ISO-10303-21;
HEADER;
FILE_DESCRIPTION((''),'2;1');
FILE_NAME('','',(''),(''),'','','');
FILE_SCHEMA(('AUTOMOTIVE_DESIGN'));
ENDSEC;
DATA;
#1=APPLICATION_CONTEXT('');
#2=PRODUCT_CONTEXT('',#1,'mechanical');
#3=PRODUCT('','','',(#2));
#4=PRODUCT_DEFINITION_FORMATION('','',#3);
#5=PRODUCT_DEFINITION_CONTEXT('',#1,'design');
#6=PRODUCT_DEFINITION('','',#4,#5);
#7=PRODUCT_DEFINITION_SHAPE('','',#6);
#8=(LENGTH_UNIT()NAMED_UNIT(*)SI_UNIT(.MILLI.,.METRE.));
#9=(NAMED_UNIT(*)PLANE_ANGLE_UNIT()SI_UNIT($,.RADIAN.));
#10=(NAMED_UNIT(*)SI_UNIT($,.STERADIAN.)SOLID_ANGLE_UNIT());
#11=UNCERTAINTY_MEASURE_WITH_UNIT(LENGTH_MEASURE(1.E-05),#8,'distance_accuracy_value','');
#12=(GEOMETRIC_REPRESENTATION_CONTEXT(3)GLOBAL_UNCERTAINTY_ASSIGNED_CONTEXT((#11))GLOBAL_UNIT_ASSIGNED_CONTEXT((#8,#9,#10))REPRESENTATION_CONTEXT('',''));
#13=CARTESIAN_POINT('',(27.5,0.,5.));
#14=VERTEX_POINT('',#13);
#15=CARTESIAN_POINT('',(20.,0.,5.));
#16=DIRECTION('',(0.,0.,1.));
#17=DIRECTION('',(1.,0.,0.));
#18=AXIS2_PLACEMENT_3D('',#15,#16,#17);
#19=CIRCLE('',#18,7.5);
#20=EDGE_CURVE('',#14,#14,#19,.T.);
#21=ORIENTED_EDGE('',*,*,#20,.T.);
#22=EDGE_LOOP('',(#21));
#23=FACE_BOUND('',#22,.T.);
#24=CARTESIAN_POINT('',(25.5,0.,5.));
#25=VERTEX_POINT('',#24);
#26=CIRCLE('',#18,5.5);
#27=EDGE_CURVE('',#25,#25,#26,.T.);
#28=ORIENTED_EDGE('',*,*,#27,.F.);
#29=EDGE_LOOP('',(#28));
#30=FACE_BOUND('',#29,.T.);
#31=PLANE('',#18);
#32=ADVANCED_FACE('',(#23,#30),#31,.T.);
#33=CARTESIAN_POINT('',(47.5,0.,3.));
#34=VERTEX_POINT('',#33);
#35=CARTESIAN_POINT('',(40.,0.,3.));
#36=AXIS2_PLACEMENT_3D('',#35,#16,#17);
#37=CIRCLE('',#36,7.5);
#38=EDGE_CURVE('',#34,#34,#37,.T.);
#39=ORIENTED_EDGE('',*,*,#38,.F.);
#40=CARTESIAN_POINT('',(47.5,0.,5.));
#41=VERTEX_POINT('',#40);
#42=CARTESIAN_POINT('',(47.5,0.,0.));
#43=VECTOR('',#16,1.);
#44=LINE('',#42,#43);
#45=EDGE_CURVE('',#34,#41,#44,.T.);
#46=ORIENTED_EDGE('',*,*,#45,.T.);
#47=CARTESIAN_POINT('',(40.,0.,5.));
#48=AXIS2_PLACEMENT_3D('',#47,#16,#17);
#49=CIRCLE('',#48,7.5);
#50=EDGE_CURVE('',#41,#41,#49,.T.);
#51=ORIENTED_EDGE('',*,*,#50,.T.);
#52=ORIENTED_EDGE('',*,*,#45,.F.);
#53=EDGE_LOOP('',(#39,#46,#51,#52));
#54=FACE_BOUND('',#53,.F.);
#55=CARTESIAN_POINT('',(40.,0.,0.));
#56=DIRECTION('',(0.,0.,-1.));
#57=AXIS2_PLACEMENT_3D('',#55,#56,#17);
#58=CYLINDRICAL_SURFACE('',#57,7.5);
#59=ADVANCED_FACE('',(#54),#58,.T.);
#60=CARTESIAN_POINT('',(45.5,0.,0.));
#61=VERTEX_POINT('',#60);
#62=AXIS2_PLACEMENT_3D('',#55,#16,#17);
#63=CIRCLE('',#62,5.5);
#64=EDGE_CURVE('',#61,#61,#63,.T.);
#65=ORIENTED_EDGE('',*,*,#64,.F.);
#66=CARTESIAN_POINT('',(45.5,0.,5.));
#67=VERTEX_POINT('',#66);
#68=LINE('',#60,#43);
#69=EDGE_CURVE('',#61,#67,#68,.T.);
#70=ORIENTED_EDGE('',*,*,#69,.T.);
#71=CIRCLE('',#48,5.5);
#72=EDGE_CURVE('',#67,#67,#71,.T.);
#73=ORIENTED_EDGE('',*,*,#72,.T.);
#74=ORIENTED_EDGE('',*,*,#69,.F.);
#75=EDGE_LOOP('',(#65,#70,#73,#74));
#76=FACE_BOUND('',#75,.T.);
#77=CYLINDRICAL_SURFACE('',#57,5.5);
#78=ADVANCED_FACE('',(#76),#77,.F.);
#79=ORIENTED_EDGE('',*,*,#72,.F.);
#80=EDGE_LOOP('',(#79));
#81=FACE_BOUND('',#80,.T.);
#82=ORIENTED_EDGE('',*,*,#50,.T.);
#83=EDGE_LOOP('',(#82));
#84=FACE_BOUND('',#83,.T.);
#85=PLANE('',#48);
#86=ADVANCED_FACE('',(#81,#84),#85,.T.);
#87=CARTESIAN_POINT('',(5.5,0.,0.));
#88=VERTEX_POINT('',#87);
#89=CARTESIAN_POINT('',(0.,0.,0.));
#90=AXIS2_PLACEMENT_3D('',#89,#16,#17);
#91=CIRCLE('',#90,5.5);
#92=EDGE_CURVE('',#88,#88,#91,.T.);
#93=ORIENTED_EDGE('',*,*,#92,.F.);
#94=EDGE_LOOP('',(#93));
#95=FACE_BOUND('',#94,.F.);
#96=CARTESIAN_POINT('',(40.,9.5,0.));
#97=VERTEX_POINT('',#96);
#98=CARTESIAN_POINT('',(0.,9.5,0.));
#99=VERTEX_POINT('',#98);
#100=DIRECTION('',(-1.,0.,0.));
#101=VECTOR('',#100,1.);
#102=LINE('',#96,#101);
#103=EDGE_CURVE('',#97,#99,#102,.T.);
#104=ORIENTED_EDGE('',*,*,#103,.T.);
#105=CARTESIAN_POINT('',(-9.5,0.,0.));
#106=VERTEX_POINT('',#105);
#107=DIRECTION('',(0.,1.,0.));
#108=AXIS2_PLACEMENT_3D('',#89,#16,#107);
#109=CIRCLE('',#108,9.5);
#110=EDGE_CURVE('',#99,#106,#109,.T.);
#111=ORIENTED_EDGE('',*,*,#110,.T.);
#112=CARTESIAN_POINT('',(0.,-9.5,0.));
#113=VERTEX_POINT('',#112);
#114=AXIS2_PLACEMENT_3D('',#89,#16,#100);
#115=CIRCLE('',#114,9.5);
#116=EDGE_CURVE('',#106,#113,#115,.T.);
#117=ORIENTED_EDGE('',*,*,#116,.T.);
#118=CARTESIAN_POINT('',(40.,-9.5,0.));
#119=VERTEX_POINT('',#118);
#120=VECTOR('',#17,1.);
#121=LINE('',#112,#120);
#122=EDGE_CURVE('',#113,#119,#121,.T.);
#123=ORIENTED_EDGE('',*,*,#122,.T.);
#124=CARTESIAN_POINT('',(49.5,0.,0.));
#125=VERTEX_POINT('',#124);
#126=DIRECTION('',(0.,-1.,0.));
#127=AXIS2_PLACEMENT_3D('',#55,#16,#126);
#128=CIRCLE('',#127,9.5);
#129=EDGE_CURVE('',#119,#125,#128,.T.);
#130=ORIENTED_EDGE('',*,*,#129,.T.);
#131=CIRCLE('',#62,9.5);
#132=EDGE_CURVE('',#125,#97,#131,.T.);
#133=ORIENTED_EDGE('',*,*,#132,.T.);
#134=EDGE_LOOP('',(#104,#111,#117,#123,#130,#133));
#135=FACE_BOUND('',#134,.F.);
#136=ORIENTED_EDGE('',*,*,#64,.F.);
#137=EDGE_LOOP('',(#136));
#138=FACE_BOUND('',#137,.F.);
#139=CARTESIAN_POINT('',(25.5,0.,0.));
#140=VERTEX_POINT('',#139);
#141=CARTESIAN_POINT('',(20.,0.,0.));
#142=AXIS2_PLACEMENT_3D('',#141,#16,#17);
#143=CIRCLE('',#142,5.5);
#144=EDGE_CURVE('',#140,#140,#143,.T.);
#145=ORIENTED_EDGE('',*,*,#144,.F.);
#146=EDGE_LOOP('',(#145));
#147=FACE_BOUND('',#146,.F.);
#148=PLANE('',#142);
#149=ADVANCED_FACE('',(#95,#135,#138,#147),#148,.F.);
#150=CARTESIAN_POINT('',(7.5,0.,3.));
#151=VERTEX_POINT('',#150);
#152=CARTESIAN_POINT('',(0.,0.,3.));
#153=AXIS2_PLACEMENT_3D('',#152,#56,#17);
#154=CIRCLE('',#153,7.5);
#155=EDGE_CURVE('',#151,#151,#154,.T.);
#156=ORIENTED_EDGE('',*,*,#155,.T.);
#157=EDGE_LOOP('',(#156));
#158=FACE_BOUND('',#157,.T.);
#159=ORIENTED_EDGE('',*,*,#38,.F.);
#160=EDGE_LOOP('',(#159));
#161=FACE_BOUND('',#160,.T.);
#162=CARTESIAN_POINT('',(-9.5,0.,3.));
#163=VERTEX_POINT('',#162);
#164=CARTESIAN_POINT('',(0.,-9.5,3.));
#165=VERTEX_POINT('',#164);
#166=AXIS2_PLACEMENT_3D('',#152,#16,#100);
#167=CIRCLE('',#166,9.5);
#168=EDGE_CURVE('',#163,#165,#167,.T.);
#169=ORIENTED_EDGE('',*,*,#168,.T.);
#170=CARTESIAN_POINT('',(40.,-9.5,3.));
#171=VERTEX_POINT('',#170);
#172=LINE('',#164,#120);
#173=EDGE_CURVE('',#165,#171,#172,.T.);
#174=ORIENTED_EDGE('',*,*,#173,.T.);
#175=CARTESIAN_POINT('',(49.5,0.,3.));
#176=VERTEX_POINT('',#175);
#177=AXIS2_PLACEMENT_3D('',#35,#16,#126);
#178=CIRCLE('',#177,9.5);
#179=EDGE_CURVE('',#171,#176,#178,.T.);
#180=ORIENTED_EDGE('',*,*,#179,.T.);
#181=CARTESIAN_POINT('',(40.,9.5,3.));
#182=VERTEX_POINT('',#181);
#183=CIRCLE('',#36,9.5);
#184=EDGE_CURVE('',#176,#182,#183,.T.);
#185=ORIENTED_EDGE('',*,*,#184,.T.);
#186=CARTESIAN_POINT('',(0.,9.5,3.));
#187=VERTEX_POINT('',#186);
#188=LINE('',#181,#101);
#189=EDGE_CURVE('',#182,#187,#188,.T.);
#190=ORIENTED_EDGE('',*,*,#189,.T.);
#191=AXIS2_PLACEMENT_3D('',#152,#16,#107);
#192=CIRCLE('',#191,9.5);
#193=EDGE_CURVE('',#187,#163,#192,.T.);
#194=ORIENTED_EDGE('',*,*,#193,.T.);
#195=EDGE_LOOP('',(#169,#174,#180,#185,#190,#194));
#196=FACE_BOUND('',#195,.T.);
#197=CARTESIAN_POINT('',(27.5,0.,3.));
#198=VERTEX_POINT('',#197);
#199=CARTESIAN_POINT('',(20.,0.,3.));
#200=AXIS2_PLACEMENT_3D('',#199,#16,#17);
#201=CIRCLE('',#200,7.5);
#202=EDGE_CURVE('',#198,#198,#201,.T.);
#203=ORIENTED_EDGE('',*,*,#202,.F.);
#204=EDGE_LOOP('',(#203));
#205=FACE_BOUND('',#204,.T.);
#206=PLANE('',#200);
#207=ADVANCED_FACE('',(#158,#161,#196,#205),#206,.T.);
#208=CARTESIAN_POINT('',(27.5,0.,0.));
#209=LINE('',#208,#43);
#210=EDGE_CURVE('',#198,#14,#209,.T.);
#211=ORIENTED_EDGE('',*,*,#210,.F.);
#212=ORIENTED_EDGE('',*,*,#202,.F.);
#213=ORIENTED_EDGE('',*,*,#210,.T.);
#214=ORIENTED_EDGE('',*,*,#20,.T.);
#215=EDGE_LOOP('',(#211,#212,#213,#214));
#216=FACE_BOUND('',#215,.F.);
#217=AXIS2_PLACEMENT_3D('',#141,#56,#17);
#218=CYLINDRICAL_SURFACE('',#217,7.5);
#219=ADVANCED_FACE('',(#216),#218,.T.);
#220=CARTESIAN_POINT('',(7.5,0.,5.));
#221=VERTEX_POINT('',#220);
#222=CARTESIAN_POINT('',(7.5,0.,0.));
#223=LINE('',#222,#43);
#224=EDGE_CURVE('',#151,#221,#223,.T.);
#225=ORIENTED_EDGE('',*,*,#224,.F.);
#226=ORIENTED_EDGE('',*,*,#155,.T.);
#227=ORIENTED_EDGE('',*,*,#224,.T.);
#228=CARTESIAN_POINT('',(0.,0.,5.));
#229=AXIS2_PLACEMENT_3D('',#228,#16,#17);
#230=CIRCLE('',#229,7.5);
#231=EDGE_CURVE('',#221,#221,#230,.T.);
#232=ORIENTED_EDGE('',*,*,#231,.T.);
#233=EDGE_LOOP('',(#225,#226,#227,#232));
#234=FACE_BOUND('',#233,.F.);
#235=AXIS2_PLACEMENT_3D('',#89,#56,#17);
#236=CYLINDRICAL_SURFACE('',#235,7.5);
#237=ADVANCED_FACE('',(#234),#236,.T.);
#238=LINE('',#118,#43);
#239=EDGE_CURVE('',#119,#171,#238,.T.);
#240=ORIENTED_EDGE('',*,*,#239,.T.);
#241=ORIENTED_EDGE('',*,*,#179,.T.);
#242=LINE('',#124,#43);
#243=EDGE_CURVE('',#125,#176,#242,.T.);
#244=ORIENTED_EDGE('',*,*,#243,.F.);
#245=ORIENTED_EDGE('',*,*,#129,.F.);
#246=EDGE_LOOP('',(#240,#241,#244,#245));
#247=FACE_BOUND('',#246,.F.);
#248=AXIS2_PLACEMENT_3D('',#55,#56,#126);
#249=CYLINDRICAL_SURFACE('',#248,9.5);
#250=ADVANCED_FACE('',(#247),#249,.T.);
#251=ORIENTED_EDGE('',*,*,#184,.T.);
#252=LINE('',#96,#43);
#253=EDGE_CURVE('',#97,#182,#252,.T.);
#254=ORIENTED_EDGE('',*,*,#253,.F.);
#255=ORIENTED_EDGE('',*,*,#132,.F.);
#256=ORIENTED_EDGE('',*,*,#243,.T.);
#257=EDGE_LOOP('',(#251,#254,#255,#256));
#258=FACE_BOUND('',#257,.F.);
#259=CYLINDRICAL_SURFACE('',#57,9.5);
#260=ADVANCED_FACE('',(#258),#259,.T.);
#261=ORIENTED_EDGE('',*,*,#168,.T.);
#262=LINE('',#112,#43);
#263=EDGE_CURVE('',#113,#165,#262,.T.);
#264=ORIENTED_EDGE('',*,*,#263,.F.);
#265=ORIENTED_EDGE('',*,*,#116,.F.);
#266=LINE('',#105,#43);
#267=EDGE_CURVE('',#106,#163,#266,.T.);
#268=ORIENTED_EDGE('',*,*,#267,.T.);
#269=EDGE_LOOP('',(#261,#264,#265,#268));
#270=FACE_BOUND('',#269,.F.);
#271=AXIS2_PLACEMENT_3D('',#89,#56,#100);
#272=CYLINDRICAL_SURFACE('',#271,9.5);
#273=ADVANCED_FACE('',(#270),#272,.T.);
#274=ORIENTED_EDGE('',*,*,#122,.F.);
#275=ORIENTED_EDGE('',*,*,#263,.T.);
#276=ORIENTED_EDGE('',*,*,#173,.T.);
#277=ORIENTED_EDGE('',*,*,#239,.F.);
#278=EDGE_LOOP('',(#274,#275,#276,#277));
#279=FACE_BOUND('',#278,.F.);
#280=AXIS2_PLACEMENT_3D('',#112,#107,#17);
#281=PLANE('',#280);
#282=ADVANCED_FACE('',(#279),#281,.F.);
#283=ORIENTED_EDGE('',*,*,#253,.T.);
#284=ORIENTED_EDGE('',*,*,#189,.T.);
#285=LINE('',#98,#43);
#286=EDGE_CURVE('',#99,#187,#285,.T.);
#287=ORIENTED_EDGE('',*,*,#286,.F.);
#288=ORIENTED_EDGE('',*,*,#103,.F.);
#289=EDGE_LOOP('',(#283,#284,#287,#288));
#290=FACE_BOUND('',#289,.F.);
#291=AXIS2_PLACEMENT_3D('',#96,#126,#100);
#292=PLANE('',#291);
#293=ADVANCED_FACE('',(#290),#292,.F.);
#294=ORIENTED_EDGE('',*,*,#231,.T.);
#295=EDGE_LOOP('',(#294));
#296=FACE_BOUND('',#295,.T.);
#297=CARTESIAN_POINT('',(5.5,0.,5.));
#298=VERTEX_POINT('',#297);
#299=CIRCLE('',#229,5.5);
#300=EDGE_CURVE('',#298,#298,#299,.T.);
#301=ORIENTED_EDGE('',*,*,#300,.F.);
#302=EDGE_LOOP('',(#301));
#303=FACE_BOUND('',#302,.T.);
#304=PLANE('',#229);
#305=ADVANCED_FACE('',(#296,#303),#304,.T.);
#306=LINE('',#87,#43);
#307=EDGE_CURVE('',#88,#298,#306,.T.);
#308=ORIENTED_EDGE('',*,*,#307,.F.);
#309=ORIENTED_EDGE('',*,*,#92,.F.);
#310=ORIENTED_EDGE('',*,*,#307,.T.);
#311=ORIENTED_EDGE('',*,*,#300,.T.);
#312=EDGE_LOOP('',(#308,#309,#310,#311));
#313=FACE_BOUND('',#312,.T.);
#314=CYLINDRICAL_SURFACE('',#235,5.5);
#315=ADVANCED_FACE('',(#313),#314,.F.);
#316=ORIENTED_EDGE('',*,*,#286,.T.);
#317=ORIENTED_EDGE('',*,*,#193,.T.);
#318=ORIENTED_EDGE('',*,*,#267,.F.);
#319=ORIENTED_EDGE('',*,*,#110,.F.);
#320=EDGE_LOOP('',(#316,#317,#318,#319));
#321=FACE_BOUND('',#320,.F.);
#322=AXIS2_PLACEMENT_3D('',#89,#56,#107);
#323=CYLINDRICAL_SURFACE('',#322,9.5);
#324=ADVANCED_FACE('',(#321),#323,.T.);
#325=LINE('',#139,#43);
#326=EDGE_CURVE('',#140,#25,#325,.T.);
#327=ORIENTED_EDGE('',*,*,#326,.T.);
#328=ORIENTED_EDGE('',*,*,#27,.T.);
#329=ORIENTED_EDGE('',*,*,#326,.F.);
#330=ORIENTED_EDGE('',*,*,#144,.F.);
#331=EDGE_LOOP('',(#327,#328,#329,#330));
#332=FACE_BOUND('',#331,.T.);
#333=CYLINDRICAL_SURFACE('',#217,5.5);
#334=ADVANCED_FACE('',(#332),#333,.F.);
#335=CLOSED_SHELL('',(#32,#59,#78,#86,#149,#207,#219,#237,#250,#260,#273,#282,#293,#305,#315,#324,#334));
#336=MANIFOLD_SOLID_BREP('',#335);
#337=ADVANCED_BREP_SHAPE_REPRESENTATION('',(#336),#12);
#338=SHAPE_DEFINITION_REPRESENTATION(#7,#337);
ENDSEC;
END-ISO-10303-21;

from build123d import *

# Parameters (mm, degrees)
F2_R     = 7.5
F2_R_2   = 5.5
F3_DEPTH = 3
F4_DEPTH = 5


# Not quite as in the source:
# - a feature names something its author has since deleted; it is built from what else it names


with BuildPart() as f3:
    # F2 (on Top) → F3 (new body)
    with BuildSketch(Plane.XY):
        with BuildLine():
            Line((40, 9.5), (0, 9.5))
            ThreePointArc((0, 9.5), (-6.7175144213, 6.7175144213), (-9.5, 0))
            ThreePointArc((-9.5, 0), (-6.7175144213, -6.7175144213), (0, -9.5))
            Line((0, -9.5), (40, -9.5))
            ThreePointArc((40, -9.5), (46.7175144213, -6.7175144213), (49.5, 0))
            ThreePointArc((49.5, 0), (46.7175144213, 6.7175144213), (40, 9.5))
        make_face()
        Circle(F2_R, mode=Mode.SUBTRACT)
        with Locations((20, 0)):
            Circle(F2_R, mode=Mode.SUBTRACT)
        with Locations((40, 0)):
            Circle(F2_R, mode=Mode.SUBTRACT)
        Circle(F2_R)
        Circle(F2_R_2, mode=Mode.SUBTRACT)
    extrude(amount=F3_DEPTH)

    # F2 (on Top) → F4 (join)
    with BuildSketch(Plane.XY):
        Circle(F2_R)
        Circle(F2_R_2, mode=Mode.SUBTRACT)
        with Locations((20, 0)):
            Circle(F2_R)
        with Locations((20, 0)):
            Circle(F2_R_2, mode=Mode.SUBTRACT)
        with Locations((40, 0)):
            Circle(F2_R)
        with Locations((40, 0)):
            Circle(F2_R_2, mode=Mode.SUBTRACT)
    extrude(amount=F4_DEPTH)


solid = f3.part
